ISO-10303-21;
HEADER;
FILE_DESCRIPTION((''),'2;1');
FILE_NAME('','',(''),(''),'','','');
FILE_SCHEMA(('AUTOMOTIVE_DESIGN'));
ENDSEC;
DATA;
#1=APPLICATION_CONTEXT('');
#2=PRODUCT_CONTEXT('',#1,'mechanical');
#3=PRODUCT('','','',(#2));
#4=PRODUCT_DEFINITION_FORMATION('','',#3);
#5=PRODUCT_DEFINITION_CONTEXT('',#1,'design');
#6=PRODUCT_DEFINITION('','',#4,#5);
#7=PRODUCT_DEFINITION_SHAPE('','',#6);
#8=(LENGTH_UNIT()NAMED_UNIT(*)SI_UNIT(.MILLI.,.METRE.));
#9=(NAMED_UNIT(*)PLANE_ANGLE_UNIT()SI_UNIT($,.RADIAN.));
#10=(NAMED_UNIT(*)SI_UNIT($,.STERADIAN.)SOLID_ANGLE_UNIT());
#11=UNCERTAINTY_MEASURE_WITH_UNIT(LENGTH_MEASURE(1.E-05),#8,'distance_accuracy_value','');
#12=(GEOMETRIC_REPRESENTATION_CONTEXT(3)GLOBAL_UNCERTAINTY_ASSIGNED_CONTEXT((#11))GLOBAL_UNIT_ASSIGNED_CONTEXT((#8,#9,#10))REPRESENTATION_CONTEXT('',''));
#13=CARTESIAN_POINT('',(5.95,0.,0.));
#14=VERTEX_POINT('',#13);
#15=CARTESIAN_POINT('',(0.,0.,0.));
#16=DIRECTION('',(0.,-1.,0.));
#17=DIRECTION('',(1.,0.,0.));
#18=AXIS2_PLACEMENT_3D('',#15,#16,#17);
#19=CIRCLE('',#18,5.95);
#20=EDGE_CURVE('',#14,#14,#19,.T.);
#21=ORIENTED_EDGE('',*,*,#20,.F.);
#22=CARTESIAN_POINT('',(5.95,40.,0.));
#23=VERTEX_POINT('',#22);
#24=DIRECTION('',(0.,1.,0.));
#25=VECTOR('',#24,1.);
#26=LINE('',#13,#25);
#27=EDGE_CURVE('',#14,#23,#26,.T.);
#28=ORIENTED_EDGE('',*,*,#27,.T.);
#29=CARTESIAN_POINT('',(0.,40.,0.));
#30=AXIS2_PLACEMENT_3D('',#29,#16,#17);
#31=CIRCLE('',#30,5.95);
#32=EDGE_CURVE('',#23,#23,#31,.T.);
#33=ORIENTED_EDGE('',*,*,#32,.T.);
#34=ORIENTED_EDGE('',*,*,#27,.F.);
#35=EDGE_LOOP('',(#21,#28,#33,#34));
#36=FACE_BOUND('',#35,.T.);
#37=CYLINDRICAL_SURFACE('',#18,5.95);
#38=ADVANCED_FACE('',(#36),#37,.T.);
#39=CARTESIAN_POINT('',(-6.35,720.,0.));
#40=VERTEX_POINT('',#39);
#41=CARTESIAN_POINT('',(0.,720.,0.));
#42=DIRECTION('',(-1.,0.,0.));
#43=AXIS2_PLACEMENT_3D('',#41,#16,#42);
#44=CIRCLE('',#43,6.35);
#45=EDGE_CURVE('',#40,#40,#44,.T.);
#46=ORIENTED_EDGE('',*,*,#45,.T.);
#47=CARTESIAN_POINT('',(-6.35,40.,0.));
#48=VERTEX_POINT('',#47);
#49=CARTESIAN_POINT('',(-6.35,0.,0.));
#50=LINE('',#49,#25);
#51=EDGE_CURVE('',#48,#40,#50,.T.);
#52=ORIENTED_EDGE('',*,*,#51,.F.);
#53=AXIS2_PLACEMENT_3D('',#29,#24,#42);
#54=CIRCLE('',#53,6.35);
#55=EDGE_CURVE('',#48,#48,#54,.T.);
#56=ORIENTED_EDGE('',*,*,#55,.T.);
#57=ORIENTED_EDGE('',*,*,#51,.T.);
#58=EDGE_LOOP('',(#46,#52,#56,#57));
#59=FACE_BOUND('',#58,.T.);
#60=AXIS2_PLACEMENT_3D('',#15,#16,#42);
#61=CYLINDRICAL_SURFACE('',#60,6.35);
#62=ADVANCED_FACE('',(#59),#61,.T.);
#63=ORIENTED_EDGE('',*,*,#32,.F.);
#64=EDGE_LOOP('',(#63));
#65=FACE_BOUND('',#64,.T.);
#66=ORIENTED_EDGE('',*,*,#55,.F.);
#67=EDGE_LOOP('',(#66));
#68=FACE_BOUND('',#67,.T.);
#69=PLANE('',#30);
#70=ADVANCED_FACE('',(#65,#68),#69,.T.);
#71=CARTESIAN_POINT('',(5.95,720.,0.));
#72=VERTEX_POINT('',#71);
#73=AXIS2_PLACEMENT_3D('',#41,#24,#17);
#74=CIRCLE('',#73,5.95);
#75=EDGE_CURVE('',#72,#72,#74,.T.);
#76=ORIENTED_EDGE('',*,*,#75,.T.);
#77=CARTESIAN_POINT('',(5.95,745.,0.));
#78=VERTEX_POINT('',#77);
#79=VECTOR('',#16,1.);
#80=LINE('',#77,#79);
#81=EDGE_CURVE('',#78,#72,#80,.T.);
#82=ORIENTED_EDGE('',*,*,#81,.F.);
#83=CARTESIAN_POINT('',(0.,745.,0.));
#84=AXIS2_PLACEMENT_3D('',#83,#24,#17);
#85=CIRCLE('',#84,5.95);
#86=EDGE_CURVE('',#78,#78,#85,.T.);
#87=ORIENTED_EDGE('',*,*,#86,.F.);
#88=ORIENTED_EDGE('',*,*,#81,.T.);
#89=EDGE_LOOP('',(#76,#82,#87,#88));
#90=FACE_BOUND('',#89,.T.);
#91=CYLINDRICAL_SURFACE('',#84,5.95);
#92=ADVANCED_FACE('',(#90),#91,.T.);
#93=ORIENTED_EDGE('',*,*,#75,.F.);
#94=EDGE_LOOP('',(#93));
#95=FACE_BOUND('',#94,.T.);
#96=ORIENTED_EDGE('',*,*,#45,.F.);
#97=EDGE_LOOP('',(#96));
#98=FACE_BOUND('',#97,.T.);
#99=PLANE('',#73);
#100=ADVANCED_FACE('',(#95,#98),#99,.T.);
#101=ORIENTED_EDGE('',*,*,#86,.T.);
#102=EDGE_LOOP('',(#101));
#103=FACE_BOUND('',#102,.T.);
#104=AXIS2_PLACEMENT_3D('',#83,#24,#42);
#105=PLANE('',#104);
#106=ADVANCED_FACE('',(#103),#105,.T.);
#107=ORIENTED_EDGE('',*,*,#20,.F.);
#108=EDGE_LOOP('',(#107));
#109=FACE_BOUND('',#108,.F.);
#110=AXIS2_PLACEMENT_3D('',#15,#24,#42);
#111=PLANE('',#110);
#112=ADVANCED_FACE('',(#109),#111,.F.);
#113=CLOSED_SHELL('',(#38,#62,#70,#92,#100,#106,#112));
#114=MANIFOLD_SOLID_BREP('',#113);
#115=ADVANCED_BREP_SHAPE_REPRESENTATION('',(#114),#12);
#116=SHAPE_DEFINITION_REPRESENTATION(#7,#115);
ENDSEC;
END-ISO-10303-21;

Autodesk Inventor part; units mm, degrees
ref_plane "YZ Plane" through (0, 0, 0) normal (1, 0, 0) x (0, 1, 0)
ref_plane "XZ Plane" through (0, 0, 0) normal (0, 1, 0) x (-1, 0, 0)
ref_plane "XY Plane" through (0, 0, 0) normal (0, 0, 1) x (1, 0, 0)
sketch "Sketch4" plane through (0, 0, 0) normal (0, 1, 0) x (-1, 0, 0)
  circle A0 centre (0, 0) radius 6.35
  dimension "d10" = 12.7
extrude "Extrusion4" add sketch "Sketch4" along normal blind 745
sketch "Sketch5" plane through (0, 745, 0) normal (0, 1, 0) x (1, 0, 0)
  circle A0 centre (0, 0) radius 5.95
  circle A1 centre (0, 0) radius 6.35
  dimension "d13" = 11.9
extrude "Extrusion5" cut sketch "Sketch5" against normal blind 25
sketch "Sketch6" plane through (0, 0, 0) normal (0, -1, 0) x (1, 0, 0)
  circle A0 centre (0, 0) radius 6.35 projected
  circle A1 centre (0, 0) radius 5.95 projected
extrude "Extrusion6" cut sketch "Sketch6" against normal blind 40
properties part number "Eixotrifilado" material "Steel, Alloy"
